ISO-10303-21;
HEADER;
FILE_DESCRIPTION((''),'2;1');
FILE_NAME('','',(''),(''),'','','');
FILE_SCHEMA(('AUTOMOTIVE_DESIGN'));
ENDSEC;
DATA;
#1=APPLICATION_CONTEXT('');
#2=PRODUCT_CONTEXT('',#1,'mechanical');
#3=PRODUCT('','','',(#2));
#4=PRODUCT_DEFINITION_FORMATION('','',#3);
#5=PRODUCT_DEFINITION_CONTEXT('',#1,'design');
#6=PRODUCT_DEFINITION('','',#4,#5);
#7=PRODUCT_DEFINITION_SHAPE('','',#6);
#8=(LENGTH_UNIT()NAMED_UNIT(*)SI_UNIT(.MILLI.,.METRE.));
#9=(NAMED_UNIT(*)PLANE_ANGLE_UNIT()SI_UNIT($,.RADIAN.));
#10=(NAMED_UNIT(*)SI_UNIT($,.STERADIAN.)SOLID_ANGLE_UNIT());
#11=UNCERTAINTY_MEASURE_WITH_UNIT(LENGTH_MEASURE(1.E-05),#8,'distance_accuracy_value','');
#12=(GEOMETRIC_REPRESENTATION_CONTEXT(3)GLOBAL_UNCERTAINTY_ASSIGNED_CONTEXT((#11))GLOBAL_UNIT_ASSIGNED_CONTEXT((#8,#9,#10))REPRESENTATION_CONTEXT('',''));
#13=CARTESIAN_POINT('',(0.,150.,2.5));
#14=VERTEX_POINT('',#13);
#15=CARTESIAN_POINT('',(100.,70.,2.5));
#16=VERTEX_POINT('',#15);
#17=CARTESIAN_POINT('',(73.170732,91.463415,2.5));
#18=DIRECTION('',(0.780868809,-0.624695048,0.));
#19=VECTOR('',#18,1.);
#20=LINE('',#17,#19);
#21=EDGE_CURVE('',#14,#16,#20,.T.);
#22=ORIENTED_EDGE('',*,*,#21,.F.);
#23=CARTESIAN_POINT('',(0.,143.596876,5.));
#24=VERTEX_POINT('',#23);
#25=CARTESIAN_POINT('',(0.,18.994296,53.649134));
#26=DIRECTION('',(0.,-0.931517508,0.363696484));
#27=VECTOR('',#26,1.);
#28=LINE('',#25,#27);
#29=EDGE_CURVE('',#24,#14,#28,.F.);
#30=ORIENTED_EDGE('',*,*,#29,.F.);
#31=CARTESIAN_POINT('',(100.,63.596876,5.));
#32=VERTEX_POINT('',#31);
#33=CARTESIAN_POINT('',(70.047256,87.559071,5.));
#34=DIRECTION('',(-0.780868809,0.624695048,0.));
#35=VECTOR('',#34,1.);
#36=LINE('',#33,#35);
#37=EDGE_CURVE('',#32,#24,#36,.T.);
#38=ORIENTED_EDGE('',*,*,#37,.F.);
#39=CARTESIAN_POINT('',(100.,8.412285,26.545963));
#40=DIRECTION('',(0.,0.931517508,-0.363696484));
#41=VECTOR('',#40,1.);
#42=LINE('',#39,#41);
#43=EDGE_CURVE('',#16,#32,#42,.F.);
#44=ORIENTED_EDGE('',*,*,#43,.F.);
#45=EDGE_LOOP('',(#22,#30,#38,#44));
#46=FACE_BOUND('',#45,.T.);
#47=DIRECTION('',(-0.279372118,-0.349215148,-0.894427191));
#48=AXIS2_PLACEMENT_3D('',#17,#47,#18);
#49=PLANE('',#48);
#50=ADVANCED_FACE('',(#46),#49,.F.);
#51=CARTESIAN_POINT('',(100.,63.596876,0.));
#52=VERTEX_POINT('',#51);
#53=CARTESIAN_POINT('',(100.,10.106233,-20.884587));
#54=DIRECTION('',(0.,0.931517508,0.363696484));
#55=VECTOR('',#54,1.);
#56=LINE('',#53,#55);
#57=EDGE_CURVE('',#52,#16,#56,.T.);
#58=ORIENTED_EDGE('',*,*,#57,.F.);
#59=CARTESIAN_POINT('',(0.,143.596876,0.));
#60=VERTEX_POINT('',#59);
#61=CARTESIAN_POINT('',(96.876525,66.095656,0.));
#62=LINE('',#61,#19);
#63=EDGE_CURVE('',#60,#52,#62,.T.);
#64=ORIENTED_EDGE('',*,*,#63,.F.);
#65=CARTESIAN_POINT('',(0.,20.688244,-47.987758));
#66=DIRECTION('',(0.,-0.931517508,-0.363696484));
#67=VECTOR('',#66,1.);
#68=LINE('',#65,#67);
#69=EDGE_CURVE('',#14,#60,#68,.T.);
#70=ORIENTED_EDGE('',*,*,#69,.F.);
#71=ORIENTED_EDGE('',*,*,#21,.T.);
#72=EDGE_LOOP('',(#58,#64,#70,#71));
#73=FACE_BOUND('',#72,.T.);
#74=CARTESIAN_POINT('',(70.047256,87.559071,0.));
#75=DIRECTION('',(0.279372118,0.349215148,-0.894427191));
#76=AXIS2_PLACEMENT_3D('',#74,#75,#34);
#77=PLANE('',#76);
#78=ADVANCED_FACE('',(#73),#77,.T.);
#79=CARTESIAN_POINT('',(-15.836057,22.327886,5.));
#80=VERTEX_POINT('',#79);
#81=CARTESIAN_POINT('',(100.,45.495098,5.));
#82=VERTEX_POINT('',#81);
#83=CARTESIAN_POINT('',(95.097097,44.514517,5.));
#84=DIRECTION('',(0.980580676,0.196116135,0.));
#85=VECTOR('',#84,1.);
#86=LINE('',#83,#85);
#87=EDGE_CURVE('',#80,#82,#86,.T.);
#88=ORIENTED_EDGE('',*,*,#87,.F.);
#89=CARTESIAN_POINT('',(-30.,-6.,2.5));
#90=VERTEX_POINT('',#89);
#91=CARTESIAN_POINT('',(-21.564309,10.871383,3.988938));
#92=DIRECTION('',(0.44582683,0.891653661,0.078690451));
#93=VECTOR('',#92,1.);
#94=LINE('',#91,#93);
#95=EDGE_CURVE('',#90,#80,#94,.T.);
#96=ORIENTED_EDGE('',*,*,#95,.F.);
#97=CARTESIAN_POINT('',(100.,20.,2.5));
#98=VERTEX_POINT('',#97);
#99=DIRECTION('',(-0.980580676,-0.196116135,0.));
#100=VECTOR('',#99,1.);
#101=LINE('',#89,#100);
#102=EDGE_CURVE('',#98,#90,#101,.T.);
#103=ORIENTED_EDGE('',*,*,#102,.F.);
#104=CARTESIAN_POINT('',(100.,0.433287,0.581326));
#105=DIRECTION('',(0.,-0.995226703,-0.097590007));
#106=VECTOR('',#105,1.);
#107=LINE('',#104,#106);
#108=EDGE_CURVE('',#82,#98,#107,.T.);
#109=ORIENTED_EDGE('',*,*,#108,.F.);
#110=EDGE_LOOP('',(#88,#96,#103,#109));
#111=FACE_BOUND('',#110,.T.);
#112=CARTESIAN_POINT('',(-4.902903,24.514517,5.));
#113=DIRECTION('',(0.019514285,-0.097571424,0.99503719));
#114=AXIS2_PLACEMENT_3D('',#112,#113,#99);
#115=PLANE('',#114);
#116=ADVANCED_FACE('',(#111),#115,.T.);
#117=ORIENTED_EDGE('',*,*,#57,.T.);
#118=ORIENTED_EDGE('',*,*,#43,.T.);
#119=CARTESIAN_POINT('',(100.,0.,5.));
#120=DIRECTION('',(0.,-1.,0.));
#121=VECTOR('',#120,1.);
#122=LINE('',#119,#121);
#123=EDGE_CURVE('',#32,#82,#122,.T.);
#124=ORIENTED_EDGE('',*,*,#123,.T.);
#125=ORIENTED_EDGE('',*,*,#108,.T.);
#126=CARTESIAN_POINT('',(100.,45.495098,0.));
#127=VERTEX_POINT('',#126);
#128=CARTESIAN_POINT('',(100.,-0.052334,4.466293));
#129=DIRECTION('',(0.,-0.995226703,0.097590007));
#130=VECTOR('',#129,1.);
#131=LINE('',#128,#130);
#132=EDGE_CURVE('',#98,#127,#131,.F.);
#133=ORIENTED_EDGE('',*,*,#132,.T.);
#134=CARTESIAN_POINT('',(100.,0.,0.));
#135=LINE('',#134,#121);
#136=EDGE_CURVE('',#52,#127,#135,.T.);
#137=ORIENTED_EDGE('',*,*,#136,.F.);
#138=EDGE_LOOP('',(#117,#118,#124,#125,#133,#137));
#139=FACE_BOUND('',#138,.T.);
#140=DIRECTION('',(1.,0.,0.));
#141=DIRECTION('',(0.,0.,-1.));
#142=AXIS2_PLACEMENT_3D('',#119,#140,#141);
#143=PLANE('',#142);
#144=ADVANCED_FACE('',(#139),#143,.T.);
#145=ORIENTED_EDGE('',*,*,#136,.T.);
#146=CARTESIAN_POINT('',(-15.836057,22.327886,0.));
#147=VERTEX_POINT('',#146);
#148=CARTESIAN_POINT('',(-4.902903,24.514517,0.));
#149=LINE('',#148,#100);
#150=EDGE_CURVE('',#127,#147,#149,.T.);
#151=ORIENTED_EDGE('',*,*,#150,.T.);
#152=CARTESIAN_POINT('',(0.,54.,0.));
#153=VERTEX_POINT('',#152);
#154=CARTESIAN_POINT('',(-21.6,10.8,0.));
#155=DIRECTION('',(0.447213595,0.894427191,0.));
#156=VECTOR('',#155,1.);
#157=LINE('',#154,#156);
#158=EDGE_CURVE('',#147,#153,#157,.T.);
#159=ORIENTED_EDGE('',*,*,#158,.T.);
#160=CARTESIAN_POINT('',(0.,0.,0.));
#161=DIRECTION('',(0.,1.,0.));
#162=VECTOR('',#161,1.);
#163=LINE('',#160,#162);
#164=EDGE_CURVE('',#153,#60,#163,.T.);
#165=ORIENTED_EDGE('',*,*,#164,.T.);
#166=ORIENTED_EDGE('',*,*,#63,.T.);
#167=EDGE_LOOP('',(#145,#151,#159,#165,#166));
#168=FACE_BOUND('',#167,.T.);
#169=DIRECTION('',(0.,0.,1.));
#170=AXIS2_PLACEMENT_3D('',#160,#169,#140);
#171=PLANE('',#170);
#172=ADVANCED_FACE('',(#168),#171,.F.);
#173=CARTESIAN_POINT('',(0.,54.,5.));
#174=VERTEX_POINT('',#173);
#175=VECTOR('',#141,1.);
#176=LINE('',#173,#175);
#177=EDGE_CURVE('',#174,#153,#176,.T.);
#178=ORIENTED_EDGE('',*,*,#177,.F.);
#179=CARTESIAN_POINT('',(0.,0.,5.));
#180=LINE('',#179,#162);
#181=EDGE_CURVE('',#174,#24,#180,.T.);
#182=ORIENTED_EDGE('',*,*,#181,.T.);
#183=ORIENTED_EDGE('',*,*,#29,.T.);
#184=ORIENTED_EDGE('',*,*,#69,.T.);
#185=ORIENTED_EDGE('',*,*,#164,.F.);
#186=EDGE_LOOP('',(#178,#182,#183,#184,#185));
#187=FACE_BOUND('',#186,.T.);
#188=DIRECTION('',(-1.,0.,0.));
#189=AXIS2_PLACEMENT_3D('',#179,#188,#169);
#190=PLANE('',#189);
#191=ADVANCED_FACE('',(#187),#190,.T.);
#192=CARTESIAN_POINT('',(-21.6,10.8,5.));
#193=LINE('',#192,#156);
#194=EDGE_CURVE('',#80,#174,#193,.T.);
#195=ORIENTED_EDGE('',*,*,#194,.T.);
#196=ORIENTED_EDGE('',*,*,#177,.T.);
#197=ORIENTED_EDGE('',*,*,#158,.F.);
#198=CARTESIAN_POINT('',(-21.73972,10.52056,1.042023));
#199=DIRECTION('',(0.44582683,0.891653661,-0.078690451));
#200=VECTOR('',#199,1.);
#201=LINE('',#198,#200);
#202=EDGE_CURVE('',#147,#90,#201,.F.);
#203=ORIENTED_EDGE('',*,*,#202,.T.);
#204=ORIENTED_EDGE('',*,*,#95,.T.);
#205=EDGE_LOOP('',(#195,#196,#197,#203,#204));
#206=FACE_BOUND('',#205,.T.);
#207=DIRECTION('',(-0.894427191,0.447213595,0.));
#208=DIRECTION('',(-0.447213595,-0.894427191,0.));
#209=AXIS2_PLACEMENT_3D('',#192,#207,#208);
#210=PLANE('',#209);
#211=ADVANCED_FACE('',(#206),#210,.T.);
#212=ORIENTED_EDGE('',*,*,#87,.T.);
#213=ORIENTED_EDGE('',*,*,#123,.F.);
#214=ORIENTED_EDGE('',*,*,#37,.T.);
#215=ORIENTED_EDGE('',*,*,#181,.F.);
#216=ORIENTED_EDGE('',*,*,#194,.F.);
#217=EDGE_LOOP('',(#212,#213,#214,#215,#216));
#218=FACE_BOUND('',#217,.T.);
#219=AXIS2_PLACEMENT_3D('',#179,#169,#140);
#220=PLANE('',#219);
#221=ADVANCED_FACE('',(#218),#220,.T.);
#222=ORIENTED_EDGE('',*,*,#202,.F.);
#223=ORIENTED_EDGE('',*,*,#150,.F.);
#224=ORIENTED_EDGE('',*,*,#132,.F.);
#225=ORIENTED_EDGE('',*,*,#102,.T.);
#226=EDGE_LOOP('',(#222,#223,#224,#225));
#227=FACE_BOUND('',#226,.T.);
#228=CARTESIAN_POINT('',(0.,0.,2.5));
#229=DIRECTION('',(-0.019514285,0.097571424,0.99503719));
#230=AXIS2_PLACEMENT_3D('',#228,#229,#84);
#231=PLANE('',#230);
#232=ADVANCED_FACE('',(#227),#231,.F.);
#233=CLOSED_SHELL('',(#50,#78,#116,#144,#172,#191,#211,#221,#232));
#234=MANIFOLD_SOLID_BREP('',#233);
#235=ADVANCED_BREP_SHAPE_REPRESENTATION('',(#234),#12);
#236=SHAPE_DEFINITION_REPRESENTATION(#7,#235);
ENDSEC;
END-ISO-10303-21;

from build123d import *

# Parameters (mm, degrees)
BOSS_EXTRUDE1_DEPTH = 5
CHAMFER6_SIZE       = 5
CHAMFER6_SIZE2      = 2.5
CHAMFER7_SIZE2      = 5
CHAMFER7_SIZE       = 2.5
CHAMFER8_SIZE       = 2.5
CHAMFER8_SIZE2      = 25
CHAMFER9_SIZE       = 2.5
CHAMFER9_SIZE_2     = 25


# Some blends are built 0.0001 mm under size
with BuildPart() as part:
    # Sketch1 → Boss-Extrude1 (new body)
    with BuildSketch(Plane.XY):
        Polygon((-30, -6), (0, 0), (0, 54), align=None)
        Polygon((100, 20), (0, 0), (0, 150), (100, 70), align=None)
    extrude(amount=BOSS_EXTRUDE1_DEPTH)

    # Chamfer6
    chamfer6_edges = [part.edges().sort_by_distance(p)[0] for p in [
        (50, 110, 5),
    ]]
    chamfer6_side = [part.faces().sort_by_distance(p)[0] for p in [
        (37.795251311, 59.015726179, 5),
    ]]
    chamfer(chamfer6_edges, length=CHAMFER6_SIZE, length2=CHAMFER6_SIZE2, reference=chamfer6_side[0])

    # Chamfer7
    chamfer7_edges = [part.edges().sort_by_distance(p)[0] for p in [
        (50, 110, 0),
    ]]
    chamfer7_side = [part.faces().sort_by_distance(p)[0] for p in [
        (50, 110, 0.05),
    ]]
    chamfer(chamfer7_edges, length=CHAMFER7_SIZE - 0.0001, length2=CHAMFER7_SIZE2 - 0.0001, reference=chamfer7_side[0])  # a hair under: the kernel refuses the full size

    # Chamfer8
    chamfer8_edges = [part.edges().sort_by_distance(p)[0] for p in [
        (35, 7, 5),
    ]]
    chamfer8_side = [part.faces().sort_by_distance(p)[0] for p in [
        (35, 7, 2.5),
    ]]
    chamfer(chamfer8_edges, length=CHAMFER8_SIZE, length2=CHAMFER8_SIZE2, reference=chamfer8_side[0])

    # Chamfer9
    # the kernel refuses this chamfer: 25, 2.5 mm, written as the material it takes off along each edge
    with BuildSketch(Plane(origin=(-93.726044684, -18.745208937, 0), x_dir=(0.07010860495922276, -0.3505430247961141, 0.933918824779468), z_dir=(0.9805806756909202, 0.19611613513818388, 0))) as chamfer9_piece_1:
        Polygon((CHAMFER9_SIZE * 0.933918824779, -CHAMFER9_SIZE * 0.357485144758), (-CHAMFER9_SIZE_2 * 0.357485144758, -CHAMFER9_SIZE_2 * 0.933918824779), (0, 0), align=None)
    extrude(amount=262.550645501, mode=Mode.SUBTRACT)


solid = part.part
